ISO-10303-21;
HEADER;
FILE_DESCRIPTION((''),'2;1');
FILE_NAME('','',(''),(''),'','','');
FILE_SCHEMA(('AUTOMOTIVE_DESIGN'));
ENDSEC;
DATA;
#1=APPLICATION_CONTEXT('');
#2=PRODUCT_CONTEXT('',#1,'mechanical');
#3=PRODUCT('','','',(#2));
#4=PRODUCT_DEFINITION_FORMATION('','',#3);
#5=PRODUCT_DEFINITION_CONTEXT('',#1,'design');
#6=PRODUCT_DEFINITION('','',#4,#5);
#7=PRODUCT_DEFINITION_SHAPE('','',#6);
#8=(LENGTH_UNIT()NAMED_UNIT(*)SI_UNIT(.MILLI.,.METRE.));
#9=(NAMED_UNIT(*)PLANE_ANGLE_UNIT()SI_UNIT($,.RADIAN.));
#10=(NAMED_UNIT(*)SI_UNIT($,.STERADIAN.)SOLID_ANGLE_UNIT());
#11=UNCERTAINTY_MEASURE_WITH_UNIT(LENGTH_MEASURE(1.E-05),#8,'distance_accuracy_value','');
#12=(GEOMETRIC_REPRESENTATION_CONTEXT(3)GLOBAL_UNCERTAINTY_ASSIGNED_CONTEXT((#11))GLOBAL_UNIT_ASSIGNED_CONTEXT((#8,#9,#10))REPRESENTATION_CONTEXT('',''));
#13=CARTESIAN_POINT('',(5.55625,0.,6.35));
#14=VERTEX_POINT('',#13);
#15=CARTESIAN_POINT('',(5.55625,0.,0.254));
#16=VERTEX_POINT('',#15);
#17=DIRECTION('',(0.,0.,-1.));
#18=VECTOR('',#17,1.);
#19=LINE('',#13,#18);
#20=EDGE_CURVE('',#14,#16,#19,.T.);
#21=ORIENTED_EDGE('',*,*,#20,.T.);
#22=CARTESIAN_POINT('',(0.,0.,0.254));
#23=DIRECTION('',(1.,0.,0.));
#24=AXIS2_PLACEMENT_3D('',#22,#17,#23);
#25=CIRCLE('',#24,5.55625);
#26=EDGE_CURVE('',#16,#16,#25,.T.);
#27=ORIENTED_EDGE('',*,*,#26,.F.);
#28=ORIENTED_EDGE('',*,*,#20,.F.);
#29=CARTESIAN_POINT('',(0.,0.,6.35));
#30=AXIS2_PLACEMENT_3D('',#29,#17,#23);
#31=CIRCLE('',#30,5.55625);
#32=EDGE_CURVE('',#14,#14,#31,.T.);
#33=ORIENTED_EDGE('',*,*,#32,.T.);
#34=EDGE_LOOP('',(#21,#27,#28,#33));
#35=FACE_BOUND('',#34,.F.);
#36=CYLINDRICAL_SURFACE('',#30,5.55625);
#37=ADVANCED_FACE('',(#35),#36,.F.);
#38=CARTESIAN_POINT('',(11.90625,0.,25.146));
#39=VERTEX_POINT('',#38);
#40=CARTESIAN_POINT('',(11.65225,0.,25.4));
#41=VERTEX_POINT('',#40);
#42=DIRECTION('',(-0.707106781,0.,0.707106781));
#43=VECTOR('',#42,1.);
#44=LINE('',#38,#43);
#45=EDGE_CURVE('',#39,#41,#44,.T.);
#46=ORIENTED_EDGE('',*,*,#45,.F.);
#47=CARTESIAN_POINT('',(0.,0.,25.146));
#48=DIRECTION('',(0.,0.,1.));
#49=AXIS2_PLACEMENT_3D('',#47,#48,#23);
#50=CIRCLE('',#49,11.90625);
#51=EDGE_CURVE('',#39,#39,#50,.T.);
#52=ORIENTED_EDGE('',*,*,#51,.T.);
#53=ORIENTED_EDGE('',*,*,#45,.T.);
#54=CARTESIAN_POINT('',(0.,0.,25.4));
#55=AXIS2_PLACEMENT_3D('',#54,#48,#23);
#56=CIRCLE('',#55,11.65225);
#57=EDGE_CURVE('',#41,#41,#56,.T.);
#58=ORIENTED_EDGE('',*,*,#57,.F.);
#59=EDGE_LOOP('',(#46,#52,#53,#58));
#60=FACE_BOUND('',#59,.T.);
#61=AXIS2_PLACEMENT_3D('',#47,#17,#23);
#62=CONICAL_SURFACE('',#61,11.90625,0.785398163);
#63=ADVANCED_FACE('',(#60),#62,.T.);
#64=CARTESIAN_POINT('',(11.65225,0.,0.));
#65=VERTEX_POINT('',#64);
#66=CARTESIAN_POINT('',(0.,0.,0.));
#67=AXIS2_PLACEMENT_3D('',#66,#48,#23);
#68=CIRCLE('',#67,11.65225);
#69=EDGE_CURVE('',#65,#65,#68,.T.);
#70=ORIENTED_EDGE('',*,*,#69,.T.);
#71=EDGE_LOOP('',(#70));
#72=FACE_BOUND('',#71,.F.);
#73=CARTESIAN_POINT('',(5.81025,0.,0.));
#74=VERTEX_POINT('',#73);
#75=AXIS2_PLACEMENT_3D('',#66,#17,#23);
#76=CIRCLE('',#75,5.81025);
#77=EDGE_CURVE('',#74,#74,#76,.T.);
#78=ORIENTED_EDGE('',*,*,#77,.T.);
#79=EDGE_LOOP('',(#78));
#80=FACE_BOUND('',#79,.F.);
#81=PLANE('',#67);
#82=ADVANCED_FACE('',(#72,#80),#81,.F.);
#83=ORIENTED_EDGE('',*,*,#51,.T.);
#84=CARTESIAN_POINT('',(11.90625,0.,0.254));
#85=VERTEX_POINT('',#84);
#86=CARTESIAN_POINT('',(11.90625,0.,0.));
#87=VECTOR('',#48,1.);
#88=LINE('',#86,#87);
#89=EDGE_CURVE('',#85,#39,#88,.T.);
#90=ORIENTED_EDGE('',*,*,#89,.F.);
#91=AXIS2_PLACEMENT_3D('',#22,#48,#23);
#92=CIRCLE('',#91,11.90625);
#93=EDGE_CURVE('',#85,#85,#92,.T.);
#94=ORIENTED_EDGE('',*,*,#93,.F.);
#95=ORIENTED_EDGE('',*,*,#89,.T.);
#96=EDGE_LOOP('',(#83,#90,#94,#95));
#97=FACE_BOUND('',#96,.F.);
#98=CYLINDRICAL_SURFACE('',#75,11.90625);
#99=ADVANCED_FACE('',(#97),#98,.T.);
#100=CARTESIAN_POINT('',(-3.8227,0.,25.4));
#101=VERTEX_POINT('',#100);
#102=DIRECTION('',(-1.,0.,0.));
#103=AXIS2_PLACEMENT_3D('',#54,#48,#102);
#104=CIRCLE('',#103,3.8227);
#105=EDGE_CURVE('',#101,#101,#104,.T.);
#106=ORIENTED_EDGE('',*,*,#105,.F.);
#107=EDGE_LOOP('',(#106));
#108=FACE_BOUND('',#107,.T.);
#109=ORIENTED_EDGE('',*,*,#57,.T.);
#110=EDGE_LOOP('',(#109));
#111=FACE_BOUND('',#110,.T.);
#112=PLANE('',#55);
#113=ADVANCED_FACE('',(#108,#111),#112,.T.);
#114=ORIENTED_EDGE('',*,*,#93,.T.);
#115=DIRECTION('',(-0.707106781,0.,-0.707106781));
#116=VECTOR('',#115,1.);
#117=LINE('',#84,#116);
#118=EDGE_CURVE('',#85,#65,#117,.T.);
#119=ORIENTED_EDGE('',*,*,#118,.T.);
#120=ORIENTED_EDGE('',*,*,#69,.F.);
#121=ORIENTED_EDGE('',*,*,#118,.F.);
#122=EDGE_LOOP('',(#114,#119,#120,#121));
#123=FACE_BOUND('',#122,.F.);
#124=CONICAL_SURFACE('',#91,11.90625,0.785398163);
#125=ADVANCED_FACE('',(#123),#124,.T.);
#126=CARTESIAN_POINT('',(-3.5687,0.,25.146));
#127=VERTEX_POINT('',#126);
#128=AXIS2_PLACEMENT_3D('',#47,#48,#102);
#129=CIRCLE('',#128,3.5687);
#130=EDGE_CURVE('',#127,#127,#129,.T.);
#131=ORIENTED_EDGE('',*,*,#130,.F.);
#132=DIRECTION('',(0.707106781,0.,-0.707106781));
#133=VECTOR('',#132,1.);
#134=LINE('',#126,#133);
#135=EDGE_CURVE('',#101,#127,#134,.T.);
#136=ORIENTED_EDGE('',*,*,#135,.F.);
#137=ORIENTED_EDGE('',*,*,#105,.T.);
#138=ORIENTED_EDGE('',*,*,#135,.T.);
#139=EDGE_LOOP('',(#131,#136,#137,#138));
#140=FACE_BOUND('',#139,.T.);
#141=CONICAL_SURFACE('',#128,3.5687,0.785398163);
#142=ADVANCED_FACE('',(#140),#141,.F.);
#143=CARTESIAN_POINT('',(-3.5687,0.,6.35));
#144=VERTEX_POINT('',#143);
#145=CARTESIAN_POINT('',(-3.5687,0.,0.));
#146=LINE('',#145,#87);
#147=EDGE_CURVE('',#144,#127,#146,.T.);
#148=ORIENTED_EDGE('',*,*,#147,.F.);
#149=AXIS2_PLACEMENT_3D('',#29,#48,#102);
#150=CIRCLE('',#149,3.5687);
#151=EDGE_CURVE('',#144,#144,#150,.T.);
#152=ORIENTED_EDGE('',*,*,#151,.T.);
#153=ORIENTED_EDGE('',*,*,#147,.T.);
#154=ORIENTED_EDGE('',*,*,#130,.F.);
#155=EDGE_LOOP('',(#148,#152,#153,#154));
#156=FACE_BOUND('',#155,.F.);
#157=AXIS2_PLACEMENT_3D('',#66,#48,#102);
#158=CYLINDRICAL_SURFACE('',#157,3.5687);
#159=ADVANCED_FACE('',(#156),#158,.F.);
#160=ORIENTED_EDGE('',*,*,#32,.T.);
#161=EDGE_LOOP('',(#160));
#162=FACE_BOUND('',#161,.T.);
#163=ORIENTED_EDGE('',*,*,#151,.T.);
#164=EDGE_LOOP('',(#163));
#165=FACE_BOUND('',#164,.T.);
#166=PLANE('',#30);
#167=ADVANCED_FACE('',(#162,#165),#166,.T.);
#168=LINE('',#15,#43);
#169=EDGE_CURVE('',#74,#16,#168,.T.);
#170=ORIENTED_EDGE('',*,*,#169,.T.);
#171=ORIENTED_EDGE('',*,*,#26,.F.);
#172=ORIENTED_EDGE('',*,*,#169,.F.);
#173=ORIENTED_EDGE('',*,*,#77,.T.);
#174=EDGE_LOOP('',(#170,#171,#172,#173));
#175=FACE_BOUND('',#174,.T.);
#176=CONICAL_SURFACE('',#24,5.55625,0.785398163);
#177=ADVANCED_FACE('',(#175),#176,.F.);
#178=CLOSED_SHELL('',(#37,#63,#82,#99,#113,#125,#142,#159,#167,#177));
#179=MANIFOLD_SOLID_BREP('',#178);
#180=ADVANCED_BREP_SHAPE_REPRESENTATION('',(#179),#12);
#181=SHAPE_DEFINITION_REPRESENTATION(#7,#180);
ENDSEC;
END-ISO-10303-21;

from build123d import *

# Parameters (mm, degrees)
F0_R           = 11.90625
F1_DEPTH       = 25.4
F2_D           = 7.1374
F2_CBORE_D     = 11.1125
F2_CBORE_DEPTH = 6.35
F3_SIZE        = 0.254


with BuildPart() as f1:
    # F0 (on Top) → F1 (new body)
    with BuildSketch(Plane.XY):
        Circle(F0_R)
    extrude(amount=F1_DEPTH)

    # F2 (through all)
    with Locations(Plane(origin=(0, 0, 0), x_dir=(1, 0, 0), z_dir=(0, 0, -1))):
        with Locations((0, 0)):
            CounterBoreHole(F2_D / 2, F2_CBORE_D / 2, F2_CBORE_DEPTH)

    # F3
    f3_edges = [f1.edges().sort_by_distance(p)[0] for p in [
        (-11.90625, 0, 25.4),
        (-11.90625, 0, 0),
        (-5.55625, 0, 0),
        (-3.5687, 0, 25.4),
    ]]
    chamfer(f3_edges, length=F3_SIZE)


solid = f1.part
